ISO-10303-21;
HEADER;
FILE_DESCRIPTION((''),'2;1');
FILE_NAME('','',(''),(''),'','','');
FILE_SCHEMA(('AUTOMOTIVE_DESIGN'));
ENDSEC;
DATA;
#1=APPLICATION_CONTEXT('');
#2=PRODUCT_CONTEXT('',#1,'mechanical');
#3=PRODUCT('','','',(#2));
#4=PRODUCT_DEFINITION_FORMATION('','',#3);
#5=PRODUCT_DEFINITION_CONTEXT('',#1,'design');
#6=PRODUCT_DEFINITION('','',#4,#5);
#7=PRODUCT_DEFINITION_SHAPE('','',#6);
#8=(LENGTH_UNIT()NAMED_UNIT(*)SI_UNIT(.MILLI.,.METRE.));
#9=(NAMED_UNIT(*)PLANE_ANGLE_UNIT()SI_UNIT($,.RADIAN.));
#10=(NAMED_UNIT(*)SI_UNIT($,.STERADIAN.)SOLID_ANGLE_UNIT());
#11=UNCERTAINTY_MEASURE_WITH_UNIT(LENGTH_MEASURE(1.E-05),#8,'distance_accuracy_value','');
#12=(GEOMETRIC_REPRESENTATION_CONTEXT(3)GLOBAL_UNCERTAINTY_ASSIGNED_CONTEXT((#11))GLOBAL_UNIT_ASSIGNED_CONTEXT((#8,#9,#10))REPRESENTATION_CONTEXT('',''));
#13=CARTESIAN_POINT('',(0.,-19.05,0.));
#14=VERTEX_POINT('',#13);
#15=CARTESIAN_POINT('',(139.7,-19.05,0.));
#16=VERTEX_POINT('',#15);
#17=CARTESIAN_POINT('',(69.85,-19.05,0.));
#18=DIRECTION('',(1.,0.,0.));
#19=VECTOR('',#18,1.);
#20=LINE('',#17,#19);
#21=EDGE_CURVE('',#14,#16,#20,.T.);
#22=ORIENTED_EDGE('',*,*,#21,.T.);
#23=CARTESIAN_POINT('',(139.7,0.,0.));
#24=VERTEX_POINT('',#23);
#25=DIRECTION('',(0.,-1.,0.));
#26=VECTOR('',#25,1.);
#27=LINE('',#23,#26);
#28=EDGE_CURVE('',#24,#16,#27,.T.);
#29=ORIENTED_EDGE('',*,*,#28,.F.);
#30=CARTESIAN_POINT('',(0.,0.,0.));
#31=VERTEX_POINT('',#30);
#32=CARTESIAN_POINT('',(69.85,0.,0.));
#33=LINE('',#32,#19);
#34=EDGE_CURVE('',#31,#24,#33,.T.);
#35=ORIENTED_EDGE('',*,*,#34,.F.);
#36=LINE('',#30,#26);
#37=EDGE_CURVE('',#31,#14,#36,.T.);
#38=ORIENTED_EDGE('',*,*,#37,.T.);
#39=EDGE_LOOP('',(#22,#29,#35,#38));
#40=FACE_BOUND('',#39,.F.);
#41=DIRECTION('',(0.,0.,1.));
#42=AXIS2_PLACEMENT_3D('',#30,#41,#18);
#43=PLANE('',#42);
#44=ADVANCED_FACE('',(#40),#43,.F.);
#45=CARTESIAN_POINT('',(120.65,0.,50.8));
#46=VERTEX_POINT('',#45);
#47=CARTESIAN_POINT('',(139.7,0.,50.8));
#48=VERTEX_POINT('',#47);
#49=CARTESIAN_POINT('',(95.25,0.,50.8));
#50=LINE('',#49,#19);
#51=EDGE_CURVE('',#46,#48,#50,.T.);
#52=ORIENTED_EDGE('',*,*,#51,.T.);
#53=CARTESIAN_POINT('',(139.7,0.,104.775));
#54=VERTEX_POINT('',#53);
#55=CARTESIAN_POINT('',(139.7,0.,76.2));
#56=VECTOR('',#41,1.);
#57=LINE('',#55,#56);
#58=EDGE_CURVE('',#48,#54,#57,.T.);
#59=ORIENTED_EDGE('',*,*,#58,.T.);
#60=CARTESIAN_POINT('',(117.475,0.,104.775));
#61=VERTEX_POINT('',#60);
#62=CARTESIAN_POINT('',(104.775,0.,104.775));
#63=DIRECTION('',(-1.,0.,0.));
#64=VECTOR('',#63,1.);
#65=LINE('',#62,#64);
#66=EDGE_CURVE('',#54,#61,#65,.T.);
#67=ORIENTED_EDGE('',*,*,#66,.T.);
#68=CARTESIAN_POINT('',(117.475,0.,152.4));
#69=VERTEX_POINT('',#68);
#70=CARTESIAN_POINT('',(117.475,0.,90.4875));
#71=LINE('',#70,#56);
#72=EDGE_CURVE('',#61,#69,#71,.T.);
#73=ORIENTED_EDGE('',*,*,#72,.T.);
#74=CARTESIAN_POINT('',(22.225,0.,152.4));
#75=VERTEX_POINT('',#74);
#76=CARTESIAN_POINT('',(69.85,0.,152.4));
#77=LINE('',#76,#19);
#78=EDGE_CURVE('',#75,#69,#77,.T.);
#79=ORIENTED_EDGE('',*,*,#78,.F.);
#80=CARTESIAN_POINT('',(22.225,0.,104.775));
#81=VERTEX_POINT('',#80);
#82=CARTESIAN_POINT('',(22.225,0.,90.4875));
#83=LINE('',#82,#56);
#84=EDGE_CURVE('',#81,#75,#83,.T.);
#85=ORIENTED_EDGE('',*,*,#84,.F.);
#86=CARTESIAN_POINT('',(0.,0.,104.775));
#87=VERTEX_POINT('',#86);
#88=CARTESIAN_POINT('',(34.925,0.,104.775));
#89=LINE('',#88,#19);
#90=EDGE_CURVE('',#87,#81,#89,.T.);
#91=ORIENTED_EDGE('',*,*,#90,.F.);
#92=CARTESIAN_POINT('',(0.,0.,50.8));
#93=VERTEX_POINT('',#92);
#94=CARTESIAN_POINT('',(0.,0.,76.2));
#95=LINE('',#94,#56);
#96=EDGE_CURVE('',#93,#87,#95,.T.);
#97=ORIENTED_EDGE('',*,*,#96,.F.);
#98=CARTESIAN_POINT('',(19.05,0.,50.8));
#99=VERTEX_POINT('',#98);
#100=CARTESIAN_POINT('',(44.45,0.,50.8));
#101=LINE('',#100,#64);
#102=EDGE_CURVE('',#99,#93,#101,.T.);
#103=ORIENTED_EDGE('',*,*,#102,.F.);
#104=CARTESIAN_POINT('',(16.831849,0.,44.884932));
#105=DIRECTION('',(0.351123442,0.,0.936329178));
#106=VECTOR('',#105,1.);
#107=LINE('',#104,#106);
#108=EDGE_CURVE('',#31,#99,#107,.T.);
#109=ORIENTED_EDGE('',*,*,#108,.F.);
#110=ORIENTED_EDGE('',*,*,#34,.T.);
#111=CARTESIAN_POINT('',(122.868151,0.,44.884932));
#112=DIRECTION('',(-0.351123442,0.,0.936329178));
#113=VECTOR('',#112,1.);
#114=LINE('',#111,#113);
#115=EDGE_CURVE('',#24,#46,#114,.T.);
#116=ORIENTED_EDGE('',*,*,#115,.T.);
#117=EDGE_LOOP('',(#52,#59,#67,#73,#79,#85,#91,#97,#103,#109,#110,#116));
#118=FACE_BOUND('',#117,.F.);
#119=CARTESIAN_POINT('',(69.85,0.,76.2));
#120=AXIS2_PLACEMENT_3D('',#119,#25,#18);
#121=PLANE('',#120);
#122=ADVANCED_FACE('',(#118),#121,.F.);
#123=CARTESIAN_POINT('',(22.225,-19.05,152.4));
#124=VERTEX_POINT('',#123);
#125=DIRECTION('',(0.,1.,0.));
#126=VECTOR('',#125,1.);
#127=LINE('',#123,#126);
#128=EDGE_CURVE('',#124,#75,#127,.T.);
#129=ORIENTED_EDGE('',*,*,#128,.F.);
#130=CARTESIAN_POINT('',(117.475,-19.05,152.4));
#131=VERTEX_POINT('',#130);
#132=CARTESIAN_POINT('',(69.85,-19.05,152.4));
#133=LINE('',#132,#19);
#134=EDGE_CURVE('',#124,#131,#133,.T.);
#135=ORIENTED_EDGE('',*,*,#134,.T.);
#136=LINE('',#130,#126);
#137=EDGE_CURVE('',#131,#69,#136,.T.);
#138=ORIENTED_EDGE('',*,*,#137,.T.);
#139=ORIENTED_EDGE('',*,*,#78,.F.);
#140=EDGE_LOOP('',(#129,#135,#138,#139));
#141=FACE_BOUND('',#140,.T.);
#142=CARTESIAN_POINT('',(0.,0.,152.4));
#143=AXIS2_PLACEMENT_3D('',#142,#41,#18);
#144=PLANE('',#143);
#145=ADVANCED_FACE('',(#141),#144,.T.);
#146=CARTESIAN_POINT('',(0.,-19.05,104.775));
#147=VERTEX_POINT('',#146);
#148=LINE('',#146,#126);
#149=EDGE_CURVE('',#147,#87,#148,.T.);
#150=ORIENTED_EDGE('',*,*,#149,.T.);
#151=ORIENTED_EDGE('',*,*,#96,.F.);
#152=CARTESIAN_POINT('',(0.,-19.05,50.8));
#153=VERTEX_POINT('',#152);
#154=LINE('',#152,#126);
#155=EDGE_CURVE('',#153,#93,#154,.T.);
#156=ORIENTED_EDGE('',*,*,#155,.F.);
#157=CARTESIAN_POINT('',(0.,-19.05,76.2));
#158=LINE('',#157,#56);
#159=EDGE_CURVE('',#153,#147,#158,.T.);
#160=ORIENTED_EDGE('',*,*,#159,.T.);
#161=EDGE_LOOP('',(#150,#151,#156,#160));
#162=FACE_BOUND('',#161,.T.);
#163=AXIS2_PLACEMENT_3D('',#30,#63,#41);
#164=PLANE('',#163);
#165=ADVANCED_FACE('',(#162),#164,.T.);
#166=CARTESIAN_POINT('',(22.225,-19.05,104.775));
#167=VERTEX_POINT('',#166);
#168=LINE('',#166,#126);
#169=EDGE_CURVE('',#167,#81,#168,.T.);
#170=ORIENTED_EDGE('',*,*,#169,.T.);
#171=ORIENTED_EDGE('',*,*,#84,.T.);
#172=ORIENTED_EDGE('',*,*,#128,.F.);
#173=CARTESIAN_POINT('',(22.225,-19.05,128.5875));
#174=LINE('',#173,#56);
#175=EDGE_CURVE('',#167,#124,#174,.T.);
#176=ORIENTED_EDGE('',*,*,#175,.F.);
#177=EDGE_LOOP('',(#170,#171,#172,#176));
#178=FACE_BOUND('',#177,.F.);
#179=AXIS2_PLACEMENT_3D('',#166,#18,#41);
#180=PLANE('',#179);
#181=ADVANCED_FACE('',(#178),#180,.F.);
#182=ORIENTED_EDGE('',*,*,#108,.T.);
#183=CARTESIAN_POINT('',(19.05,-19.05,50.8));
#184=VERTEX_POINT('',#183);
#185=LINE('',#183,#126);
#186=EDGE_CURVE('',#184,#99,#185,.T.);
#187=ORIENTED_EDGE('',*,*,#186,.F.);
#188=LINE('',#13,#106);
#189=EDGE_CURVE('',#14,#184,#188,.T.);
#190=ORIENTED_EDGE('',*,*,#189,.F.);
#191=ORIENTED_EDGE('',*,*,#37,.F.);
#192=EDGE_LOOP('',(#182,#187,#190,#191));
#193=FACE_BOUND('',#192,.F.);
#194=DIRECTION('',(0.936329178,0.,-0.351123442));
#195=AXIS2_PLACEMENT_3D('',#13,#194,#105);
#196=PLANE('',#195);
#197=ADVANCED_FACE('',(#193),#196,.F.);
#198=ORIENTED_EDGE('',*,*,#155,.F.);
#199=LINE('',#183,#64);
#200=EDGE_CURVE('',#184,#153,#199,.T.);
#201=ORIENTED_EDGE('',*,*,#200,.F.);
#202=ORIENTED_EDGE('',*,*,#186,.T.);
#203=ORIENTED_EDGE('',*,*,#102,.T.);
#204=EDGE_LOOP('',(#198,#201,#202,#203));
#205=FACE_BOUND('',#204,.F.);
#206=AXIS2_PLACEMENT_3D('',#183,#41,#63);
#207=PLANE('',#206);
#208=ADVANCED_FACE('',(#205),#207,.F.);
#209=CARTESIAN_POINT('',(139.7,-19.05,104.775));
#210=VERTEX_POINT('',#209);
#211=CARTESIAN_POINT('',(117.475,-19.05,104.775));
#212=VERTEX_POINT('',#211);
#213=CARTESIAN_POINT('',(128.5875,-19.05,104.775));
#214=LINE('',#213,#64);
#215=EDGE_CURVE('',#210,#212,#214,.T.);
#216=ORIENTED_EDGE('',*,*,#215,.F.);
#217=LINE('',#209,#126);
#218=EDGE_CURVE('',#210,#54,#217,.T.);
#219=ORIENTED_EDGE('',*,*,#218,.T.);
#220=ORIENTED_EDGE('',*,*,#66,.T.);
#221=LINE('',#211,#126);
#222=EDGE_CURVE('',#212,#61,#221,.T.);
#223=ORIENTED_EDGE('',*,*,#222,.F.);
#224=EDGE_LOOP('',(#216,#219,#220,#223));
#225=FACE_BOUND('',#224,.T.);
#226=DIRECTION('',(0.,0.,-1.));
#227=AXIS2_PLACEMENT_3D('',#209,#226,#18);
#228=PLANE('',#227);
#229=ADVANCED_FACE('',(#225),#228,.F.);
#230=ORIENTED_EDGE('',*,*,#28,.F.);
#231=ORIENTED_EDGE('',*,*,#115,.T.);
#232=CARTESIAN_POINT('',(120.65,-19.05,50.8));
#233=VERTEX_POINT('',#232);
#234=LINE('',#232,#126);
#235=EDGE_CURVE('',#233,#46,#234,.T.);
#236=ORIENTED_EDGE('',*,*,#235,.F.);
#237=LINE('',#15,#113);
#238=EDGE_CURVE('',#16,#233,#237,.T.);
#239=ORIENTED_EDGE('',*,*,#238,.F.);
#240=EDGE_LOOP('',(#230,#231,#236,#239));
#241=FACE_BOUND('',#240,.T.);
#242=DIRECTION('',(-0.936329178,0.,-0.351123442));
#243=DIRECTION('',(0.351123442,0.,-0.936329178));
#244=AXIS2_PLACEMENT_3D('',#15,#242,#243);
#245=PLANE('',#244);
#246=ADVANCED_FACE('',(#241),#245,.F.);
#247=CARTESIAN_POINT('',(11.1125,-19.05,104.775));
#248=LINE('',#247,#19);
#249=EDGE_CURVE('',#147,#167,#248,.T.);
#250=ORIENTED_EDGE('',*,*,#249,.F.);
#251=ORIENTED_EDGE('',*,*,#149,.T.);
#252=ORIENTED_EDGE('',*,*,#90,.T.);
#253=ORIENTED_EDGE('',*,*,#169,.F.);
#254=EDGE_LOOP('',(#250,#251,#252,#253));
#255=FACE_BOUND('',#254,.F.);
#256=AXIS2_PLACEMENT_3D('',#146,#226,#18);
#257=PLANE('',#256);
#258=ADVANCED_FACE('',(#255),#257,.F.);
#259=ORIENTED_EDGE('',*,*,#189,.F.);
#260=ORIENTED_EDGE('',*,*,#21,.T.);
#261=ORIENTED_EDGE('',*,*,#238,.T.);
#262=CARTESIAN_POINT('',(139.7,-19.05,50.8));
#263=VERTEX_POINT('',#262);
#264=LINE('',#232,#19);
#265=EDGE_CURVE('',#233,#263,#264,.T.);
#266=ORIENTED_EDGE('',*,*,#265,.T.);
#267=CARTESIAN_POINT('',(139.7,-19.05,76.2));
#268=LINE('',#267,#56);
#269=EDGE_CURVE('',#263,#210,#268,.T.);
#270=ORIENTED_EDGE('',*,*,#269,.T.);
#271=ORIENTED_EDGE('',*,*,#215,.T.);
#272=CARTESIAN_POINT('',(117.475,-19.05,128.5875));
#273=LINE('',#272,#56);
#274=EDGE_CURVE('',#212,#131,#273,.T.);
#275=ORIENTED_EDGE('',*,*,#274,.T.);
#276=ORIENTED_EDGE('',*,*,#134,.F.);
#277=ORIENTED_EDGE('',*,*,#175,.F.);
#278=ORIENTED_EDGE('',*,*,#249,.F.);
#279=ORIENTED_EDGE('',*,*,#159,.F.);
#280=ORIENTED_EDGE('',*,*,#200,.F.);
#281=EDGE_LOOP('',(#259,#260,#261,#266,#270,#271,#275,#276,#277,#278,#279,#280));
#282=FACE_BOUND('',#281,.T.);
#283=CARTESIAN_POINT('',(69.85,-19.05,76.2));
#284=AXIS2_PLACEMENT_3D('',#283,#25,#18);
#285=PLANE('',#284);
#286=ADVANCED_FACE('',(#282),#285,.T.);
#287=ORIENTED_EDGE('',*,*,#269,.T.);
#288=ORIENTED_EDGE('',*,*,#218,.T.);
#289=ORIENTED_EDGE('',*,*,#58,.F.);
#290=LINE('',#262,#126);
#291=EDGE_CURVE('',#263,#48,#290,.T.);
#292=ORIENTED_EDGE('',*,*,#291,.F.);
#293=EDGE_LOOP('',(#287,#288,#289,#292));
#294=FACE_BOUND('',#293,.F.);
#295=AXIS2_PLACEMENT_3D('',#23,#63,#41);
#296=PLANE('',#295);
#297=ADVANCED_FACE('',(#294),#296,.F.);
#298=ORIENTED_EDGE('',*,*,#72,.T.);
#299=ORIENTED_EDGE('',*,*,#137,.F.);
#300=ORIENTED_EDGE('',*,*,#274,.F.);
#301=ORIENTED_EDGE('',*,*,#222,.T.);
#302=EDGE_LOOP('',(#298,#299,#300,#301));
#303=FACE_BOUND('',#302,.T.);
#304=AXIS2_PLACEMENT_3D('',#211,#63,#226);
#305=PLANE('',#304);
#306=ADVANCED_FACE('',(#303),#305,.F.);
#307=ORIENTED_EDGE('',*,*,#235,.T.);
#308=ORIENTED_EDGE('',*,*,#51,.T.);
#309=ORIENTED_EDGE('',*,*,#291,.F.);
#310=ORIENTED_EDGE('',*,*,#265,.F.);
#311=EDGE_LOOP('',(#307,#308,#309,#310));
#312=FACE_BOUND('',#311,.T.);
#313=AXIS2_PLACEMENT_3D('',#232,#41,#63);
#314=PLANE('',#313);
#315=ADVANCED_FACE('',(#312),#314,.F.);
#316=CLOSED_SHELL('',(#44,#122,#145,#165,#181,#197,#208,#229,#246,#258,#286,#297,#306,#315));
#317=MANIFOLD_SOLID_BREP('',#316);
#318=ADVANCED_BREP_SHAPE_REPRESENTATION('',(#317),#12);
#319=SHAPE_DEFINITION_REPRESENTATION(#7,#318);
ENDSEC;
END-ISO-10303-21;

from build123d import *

# Parameters (mm, degrees)
F0_W     = 139.7
F0_H     = 152.4
F1_DEPTH = 19.05
F2_W     = 22.225
F2_H     = 47.625
F3_DEPTH = 19.051
F6_DEPTH = 19.051


# Not quite as in the source:
# - a length typed as a fraction of an inch, garbled in the dataset ("3 / 203.2 mm" for 3/8 in), is restored
# - a pattern or mirror of a feature is missing from the dataset's text; its kind, count and spacing are read off the source's solid


with BuildPart() as f1:
    # F0 (on Front) → F1 (new body)
    with BuildSketch(Plane.XZ):
        with Locations((69.85, 76.2)):
            Rectangle(F0_W, F0_H)
    extrude(amount=F1_DEPTH)

    # F2 (on face) → F3 (cut, through all)
    with BuildSketch(Plane.XZ.offset(19.05)):
        with Locations((11.1125, 128.5875)):
            Rectangle(F2_W, F2_H)
    f3 = extrude(amount=-F3_DEPTH, mode=Mode.SUBTRACT)

    # F3_copies: F3 across plane
    add(f3.mirror(Plane(origin=(69.85, 0, 0), x_dir=(0, 0, 1), z_dir=(1, 0, 0))), mode=Mode.SUBTRACT)

    # F5 (on face) → F6 (cut, through all)
    with BuildSketch(Plane.XZ.offset(19.05)):
        Polygon((0, 50.8), (0, 0), (19.05, 50.8), align=None)
    f6 = extrude(amount=-F6_DEPTH, mode=Mode.SUBTRACT)

    # F6_copies: F6 across plane
    add(f6.mirror(Plane(origin=(69.85, 0, 0), x_dir=(0, 0, 1), z_dir=(1, 0, 0))), mode=Mode.SUBTRACT)


solid = f1.part
